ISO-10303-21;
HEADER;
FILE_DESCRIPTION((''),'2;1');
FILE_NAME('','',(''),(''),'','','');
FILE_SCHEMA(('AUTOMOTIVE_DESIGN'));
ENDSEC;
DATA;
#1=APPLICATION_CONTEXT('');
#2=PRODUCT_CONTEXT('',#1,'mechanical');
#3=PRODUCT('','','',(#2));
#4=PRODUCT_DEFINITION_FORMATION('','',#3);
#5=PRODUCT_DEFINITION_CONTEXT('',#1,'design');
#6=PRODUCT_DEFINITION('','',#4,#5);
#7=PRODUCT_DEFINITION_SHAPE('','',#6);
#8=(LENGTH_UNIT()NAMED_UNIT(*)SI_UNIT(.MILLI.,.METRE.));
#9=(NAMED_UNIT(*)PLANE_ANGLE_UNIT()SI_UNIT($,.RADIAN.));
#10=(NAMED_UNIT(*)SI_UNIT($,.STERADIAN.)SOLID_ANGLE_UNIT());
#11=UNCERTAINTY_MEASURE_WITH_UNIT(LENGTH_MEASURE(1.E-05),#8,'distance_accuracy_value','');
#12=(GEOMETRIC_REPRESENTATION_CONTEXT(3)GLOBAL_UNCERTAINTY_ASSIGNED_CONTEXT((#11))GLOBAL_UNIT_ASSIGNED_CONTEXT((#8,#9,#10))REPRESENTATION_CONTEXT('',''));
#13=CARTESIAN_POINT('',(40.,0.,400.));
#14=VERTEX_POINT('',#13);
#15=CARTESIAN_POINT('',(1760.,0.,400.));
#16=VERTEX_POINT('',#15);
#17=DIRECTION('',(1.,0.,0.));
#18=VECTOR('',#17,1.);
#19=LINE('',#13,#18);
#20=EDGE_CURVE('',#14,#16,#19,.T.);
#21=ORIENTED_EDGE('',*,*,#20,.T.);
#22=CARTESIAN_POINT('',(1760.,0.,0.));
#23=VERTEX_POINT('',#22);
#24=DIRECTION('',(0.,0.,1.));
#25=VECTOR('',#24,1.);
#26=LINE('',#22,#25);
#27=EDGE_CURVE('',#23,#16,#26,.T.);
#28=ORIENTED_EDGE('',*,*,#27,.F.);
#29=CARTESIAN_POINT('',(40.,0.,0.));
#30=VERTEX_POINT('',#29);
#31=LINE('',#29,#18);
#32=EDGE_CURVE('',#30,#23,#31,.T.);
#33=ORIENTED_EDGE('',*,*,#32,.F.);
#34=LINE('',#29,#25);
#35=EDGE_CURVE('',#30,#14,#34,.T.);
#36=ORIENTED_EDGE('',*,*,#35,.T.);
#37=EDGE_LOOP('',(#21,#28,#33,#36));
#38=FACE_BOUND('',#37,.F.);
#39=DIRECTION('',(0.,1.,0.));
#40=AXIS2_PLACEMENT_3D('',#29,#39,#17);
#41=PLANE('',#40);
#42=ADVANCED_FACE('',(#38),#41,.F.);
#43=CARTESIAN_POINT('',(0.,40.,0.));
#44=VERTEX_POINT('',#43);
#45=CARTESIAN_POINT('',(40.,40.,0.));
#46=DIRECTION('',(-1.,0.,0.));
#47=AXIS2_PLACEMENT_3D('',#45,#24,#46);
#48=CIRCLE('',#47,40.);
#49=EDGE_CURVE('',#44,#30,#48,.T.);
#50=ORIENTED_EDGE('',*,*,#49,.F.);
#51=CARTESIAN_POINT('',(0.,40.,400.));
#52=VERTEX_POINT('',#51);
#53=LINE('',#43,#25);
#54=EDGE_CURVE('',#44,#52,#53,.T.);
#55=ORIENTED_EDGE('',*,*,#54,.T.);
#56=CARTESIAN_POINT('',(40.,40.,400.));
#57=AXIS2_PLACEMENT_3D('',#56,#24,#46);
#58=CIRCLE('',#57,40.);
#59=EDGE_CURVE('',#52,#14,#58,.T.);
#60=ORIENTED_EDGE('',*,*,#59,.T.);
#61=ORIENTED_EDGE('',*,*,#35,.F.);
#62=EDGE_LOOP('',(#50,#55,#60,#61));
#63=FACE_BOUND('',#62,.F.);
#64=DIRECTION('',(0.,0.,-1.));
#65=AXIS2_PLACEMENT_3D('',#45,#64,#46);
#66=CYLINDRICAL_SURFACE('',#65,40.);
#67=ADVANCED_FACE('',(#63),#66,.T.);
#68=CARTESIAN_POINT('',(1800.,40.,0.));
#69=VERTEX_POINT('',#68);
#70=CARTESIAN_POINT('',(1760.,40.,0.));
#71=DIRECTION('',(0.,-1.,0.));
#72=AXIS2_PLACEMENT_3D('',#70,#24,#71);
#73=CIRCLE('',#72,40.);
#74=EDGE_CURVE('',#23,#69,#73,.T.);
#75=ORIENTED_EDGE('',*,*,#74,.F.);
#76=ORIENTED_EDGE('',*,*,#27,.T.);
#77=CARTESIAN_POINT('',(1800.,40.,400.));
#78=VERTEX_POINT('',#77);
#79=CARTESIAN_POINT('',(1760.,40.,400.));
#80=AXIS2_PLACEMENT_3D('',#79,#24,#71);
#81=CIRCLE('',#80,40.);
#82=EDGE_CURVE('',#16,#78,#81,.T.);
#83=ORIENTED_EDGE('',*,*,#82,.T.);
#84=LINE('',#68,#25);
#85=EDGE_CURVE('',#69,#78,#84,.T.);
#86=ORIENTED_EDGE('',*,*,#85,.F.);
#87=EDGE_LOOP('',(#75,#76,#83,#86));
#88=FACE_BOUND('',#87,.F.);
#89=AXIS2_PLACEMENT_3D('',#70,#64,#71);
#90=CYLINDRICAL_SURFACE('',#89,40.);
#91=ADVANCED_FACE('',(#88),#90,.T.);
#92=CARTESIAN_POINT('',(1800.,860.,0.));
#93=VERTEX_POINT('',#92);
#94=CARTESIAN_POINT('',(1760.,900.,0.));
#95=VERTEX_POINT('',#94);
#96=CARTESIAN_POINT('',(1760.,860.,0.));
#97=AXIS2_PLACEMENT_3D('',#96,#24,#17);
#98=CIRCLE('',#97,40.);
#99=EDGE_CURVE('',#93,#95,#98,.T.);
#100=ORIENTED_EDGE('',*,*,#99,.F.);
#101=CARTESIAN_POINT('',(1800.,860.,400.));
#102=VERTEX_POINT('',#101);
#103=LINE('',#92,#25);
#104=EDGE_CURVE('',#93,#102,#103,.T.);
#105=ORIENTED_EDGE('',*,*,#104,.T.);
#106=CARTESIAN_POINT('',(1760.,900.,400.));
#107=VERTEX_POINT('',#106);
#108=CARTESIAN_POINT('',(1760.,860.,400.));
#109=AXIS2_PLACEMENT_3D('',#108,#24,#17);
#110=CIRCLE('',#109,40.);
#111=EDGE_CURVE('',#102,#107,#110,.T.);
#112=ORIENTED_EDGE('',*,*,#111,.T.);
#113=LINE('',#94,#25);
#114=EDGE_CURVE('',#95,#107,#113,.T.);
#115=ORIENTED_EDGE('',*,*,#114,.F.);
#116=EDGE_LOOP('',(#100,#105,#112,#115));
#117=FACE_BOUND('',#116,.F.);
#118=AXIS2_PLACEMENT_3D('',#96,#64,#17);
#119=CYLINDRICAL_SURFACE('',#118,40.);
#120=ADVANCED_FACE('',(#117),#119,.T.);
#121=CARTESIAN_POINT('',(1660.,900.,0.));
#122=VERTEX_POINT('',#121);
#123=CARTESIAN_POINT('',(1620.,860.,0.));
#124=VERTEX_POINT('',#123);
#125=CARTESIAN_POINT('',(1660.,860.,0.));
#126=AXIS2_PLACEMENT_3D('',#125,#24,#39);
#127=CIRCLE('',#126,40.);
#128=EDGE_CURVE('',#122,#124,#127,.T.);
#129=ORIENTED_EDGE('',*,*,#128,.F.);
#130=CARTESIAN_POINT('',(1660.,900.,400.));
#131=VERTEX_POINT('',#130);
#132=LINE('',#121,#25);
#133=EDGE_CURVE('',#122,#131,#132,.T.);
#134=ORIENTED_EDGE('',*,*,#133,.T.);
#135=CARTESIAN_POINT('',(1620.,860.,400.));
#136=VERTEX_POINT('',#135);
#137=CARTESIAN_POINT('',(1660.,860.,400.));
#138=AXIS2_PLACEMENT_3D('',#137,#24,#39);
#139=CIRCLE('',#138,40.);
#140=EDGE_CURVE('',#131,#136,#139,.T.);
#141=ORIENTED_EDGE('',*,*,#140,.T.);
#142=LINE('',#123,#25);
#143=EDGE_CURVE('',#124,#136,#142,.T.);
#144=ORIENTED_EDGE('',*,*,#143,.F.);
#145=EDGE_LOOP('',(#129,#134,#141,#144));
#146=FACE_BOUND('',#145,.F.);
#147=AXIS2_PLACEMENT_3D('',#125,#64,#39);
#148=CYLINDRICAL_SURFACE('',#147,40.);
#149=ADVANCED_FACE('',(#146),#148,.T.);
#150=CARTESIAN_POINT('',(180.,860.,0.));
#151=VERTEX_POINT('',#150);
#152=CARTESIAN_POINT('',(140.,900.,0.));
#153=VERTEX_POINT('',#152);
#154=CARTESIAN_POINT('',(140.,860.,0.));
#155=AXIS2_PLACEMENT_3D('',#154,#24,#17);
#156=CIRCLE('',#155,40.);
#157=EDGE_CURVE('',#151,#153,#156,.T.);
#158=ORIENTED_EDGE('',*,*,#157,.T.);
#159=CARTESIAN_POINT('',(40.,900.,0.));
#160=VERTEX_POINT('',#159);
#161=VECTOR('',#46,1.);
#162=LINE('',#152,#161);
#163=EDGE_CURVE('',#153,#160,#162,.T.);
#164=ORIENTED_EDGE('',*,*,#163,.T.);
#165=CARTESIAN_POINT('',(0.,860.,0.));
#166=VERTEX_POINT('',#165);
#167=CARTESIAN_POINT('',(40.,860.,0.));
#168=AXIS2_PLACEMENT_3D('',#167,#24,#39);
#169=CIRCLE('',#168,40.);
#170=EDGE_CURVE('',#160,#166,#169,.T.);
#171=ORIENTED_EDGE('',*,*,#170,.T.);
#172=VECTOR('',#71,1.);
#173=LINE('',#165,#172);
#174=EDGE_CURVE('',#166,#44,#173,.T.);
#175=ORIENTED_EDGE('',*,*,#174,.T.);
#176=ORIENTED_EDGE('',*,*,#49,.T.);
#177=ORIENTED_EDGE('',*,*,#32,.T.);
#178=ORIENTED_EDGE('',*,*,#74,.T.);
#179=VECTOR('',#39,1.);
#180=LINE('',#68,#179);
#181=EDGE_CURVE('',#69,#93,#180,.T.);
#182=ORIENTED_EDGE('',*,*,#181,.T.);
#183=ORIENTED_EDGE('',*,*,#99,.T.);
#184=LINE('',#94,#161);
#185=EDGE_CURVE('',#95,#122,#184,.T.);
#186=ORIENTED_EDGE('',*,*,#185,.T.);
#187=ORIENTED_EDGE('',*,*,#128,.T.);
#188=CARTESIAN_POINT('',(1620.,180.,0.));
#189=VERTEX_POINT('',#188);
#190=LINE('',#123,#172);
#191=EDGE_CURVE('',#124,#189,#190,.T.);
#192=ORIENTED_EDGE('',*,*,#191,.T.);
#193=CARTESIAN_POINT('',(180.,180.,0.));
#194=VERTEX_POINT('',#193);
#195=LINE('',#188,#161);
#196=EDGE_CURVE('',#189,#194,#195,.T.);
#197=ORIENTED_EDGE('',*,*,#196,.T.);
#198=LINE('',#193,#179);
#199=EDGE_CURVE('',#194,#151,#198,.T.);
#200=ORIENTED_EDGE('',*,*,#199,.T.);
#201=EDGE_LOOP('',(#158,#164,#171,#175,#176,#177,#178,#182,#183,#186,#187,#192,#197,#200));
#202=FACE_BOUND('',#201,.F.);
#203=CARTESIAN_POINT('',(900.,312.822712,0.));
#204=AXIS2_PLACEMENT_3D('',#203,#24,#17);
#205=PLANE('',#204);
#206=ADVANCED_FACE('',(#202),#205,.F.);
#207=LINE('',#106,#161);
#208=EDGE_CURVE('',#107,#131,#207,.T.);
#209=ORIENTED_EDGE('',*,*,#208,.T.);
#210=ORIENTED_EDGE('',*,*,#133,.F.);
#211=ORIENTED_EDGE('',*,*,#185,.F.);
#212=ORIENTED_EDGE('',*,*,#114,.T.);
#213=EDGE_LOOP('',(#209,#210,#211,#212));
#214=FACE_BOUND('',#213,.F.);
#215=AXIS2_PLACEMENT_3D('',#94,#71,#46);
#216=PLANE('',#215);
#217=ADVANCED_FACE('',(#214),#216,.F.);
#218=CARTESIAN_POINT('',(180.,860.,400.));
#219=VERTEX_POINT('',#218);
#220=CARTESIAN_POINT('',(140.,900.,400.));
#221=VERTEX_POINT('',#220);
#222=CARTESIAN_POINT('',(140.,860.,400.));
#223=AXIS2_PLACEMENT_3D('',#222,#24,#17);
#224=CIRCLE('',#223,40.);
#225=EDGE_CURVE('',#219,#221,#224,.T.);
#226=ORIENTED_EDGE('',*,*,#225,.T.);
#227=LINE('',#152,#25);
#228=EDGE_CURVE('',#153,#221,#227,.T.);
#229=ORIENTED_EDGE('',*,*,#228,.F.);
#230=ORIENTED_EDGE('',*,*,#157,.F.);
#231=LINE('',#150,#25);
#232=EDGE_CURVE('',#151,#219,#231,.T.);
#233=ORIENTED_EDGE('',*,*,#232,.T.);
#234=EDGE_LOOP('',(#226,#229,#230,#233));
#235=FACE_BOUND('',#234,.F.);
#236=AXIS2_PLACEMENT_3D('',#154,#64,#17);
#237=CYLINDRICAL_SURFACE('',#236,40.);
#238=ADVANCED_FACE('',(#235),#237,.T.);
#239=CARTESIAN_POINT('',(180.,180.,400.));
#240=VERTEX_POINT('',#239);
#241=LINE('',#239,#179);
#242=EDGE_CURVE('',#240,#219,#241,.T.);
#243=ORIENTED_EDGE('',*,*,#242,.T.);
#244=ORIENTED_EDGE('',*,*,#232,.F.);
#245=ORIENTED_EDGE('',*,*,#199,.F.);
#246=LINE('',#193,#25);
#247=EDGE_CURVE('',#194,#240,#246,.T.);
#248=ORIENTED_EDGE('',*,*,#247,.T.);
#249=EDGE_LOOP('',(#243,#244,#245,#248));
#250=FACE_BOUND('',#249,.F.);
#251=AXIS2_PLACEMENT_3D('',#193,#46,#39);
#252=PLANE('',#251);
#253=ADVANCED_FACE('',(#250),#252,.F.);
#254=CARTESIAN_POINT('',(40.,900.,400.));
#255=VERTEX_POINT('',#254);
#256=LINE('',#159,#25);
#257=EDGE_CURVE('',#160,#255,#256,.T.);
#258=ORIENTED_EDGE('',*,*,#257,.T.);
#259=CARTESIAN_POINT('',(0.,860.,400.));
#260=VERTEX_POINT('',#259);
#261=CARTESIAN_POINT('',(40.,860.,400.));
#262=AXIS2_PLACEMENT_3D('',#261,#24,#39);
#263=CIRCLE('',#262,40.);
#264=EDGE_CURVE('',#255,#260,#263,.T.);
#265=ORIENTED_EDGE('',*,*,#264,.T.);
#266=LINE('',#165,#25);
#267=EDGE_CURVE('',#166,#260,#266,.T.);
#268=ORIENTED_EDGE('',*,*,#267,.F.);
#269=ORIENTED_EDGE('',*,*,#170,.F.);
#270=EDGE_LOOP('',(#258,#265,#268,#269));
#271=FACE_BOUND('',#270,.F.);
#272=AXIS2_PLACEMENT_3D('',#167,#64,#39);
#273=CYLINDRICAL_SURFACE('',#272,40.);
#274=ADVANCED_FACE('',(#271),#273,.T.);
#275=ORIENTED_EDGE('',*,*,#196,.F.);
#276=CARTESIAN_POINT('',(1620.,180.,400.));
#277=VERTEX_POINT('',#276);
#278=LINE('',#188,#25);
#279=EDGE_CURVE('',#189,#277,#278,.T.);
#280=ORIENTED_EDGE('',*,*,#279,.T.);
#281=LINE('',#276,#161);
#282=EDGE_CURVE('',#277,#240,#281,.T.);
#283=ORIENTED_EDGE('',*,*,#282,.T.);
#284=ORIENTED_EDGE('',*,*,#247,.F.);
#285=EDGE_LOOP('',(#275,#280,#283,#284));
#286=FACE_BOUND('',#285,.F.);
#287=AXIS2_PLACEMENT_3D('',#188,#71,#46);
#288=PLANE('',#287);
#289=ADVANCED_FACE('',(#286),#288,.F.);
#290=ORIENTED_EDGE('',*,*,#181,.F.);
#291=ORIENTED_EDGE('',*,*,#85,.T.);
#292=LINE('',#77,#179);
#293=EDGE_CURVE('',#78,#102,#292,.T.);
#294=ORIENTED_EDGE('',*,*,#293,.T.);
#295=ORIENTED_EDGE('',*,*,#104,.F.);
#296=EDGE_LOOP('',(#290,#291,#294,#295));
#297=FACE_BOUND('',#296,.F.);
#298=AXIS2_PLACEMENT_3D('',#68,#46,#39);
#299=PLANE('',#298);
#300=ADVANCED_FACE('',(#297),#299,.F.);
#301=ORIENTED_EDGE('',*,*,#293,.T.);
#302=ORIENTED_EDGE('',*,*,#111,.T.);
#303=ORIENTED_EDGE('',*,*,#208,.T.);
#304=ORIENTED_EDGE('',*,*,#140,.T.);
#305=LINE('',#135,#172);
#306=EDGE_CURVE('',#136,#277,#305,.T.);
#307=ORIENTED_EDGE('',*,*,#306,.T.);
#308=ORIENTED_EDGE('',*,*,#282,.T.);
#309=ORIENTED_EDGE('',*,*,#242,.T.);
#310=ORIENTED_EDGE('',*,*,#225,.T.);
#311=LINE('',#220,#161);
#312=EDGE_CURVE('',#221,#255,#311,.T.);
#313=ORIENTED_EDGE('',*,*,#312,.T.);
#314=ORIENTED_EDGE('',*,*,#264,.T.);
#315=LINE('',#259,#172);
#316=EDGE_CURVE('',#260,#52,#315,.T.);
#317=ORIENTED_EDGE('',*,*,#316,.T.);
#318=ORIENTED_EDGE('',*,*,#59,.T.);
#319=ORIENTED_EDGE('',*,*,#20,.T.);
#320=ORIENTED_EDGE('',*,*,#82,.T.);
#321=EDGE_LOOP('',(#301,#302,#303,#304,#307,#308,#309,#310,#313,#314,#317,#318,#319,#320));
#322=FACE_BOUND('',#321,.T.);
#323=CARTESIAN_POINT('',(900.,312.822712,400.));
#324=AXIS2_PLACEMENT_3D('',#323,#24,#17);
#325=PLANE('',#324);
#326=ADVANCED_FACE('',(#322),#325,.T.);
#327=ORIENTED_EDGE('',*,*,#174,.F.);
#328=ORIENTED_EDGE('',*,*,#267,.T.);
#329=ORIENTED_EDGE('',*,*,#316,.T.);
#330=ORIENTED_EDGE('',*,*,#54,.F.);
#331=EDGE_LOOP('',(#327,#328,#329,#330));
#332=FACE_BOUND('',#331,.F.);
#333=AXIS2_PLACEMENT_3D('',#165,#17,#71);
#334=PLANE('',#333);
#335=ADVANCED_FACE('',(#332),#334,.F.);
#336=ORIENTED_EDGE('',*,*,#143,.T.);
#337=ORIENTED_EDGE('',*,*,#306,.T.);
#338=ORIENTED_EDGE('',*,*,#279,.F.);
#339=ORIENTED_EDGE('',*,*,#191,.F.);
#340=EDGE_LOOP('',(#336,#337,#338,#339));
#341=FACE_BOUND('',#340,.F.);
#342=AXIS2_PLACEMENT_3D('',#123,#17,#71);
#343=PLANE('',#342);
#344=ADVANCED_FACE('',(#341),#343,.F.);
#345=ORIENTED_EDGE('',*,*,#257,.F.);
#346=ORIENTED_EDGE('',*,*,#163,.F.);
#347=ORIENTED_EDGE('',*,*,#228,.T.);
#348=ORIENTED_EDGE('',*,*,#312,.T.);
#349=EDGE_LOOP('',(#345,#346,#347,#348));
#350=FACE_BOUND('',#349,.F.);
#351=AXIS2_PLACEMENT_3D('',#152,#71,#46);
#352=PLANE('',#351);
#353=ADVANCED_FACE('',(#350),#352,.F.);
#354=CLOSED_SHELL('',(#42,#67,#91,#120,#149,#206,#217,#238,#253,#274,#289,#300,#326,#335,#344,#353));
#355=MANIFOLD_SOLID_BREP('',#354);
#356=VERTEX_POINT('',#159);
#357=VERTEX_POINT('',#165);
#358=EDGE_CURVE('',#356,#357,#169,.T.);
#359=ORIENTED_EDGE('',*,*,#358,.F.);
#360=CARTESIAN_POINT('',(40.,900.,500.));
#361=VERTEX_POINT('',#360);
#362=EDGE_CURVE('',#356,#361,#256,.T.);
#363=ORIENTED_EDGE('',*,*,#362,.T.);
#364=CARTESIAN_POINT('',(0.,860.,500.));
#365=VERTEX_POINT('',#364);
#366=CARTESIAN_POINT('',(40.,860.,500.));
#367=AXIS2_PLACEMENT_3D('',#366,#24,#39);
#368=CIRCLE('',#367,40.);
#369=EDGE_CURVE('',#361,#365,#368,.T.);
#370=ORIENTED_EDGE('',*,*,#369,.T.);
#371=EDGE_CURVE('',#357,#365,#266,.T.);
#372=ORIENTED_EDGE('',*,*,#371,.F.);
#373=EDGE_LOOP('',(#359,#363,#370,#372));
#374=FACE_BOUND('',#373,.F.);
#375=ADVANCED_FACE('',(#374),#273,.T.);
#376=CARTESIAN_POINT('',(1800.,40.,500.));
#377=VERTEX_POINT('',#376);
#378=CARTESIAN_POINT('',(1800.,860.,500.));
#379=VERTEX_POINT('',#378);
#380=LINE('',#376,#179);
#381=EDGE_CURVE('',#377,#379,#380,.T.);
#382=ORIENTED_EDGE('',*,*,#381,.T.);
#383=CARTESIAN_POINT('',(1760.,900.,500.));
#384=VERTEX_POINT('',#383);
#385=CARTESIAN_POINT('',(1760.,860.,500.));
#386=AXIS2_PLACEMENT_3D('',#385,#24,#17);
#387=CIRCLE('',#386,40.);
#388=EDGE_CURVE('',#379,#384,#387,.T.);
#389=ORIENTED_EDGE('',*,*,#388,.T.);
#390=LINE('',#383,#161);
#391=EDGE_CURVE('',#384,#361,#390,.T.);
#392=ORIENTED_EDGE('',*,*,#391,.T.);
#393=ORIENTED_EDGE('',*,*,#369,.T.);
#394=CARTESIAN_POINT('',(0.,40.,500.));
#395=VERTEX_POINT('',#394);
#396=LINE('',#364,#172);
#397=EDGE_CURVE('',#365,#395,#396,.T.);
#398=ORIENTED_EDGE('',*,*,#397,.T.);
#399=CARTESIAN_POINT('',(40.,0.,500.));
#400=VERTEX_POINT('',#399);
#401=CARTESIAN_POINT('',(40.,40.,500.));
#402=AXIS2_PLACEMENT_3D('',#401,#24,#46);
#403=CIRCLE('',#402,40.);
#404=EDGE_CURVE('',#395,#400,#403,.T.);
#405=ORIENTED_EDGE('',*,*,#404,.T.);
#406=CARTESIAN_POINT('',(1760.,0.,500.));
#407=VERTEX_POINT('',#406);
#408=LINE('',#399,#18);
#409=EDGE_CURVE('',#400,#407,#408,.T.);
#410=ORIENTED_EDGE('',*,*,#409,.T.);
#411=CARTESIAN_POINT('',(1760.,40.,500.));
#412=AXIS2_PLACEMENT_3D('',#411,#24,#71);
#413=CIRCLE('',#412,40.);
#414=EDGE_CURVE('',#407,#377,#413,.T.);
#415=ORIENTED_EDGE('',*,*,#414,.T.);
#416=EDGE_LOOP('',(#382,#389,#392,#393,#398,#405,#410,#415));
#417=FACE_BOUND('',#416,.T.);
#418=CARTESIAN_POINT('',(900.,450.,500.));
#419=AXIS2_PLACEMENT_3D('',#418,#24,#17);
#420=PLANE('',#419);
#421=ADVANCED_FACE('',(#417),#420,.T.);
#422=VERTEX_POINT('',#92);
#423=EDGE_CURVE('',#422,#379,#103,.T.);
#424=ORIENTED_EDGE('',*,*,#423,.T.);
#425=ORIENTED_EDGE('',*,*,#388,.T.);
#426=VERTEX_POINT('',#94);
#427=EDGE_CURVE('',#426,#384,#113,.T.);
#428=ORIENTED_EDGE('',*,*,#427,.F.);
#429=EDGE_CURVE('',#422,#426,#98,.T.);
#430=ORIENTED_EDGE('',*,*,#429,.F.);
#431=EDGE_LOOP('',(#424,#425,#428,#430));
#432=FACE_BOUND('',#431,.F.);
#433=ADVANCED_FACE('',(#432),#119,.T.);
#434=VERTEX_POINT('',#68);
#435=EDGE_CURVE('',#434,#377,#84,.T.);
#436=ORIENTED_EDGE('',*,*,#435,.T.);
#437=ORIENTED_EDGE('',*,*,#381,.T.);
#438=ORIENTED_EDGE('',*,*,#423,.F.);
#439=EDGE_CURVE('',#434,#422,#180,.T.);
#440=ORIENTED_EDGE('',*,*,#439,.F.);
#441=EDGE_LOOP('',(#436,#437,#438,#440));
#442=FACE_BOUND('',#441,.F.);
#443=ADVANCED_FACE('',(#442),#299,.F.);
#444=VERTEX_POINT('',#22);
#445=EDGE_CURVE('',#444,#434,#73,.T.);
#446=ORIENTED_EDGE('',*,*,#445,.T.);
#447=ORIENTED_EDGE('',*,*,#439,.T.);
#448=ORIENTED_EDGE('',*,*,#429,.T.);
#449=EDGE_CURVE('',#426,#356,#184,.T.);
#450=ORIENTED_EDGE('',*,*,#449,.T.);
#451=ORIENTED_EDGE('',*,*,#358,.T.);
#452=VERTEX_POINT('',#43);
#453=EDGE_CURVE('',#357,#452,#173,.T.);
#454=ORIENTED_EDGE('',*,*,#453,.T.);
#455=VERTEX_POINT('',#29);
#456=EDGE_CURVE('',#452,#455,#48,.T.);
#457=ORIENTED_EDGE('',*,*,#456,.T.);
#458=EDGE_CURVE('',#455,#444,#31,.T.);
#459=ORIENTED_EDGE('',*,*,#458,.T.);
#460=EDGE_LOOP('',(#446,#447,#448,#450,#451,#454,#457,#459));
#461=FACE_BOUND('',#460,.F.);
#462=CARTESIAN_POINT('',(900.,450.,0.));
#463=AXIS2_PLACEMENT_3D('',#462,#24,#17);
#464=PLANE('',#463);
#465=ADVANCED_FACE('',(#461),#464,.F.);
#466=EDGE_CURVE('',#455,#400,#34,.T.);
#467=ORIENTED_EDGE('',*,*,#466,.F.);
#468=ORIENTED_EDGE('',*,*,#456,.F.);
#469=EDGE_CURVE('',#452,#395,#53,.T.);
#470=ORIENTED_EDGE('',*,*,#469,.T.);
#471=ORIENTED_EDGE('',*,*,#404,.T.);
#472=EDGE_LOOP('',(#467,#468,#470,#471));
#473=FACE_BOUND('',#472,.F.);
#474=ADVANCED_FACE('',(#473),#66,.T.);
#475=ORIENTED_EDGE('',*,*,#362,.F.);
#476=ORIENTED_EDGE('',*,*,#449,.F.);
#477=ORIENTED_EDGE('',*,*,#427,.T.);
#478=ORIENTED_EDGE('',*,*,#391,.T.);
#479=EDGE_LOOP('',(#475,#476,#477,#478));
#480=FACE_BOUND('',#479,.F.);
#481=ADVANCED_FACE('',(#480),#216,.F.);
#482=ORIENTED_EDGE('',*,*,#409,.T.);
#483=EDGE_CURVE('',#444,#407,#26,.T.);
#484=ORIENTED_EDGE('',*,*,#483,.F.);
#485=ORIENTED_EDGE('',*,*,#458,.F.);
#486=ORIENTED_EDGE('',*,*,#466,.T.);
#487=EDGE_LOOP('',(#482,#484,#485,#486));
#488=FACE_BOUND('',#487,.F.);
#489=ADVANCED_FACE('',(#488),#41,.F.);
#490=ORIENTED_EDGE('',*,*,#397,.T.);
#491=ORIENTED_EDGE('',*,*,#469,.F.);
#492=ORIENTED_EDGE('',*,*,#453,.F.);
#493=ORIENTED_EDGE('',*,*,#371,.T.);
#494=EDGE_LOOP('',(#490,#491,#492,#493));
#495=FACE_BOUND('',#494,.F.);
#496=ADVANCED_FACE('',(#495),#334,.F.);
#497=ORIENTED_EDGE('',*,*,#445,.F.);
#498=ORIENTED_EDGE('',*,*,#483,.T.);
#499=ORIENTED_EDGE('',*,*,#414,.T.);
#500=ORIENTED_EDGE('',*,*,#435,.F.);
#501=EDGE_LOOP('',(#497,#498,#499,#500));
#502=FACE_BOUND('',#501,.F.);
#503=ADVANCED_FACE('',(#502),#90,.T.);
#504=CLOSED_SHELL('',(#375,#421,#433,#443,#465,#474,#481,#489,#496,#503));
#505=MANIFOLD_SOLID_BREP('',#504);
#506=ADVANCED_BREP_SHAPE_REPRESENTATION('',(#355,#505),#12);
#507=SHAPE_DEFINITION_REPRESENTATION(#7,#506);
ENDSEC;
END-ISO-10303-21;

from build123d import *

# Parameters (mm, degrees)
F1_DEPTH = 500
F3_DEPTH = 400


# Not quite as in the source:
# - a feature names something its author has since deleted; it is built from what else it names


with BuildPart() as f1:
    # F0 (on Top) → F1 (new body)
    with BuildSketch(Plane.XY):
        with BuildLine():
            ThreePointArc((0, 40), (11.7157287525, 11.7157287525), (40, 0))
            Line((40, 0), (1760, 0))
            ThreePointArc((1760, 0), (1788.2842712475, 11.7157287525), (1800, 40))
            Line((1800, 40), (1800, 860))
            ThreePointArc((1800, 860), (1788.2842712475, 888.2842712475), (1760, 900))
            Line((1760, 900), (40, 900))
            ThreePointArc((40, 900), (11.7157287525, 888.2842712475), (0, 860))
            Line((0, 860), (0, 40))
        make_face()
    extrude(amount=F1_DEPTH)


with BuildPart() as f3:
    # F2 (on Top) → F3 (new body)
    with BuildSketch(Plane.XY):
        with BuildLine():
            ThreePointArc((40, 900), (11.7157287525, 888.2842712475), (0, 860))
            Line((0, 860), (0, 40))
            ThreePointArc((0, 40), (11.7157287525, 11.7157287525), (40, 0))
            Line((40, 0), (1760, 0))
            ThreePointArc((1760, 0), (1788.2842712475, 11.7157287525), (1800, 40))
            Line((1800, 40), (1800, 860))
            ThreePointArc((1800, 860), (1788.2842712475, 888.2842712475), (1760, 900))
            Line((1760, 900), (1660, 900))
            ThreePointArc((1660, 900), (1631.7157287525, 888.2842712475), (1620, 860))
            Line((1620, 860), (1620, 180))
            Line((1620, 180), (180, 180))
            Line((180, 180), (180, 860))
            ThreePointArc((180, 860), (168.2842712475, 888.2842712475), (140, 900))
            Line((140, 900), (40, 900))
        make_face()
    extrude(amount=F3_DEPTH)


solid = Compound([f1.part, f3.part])
